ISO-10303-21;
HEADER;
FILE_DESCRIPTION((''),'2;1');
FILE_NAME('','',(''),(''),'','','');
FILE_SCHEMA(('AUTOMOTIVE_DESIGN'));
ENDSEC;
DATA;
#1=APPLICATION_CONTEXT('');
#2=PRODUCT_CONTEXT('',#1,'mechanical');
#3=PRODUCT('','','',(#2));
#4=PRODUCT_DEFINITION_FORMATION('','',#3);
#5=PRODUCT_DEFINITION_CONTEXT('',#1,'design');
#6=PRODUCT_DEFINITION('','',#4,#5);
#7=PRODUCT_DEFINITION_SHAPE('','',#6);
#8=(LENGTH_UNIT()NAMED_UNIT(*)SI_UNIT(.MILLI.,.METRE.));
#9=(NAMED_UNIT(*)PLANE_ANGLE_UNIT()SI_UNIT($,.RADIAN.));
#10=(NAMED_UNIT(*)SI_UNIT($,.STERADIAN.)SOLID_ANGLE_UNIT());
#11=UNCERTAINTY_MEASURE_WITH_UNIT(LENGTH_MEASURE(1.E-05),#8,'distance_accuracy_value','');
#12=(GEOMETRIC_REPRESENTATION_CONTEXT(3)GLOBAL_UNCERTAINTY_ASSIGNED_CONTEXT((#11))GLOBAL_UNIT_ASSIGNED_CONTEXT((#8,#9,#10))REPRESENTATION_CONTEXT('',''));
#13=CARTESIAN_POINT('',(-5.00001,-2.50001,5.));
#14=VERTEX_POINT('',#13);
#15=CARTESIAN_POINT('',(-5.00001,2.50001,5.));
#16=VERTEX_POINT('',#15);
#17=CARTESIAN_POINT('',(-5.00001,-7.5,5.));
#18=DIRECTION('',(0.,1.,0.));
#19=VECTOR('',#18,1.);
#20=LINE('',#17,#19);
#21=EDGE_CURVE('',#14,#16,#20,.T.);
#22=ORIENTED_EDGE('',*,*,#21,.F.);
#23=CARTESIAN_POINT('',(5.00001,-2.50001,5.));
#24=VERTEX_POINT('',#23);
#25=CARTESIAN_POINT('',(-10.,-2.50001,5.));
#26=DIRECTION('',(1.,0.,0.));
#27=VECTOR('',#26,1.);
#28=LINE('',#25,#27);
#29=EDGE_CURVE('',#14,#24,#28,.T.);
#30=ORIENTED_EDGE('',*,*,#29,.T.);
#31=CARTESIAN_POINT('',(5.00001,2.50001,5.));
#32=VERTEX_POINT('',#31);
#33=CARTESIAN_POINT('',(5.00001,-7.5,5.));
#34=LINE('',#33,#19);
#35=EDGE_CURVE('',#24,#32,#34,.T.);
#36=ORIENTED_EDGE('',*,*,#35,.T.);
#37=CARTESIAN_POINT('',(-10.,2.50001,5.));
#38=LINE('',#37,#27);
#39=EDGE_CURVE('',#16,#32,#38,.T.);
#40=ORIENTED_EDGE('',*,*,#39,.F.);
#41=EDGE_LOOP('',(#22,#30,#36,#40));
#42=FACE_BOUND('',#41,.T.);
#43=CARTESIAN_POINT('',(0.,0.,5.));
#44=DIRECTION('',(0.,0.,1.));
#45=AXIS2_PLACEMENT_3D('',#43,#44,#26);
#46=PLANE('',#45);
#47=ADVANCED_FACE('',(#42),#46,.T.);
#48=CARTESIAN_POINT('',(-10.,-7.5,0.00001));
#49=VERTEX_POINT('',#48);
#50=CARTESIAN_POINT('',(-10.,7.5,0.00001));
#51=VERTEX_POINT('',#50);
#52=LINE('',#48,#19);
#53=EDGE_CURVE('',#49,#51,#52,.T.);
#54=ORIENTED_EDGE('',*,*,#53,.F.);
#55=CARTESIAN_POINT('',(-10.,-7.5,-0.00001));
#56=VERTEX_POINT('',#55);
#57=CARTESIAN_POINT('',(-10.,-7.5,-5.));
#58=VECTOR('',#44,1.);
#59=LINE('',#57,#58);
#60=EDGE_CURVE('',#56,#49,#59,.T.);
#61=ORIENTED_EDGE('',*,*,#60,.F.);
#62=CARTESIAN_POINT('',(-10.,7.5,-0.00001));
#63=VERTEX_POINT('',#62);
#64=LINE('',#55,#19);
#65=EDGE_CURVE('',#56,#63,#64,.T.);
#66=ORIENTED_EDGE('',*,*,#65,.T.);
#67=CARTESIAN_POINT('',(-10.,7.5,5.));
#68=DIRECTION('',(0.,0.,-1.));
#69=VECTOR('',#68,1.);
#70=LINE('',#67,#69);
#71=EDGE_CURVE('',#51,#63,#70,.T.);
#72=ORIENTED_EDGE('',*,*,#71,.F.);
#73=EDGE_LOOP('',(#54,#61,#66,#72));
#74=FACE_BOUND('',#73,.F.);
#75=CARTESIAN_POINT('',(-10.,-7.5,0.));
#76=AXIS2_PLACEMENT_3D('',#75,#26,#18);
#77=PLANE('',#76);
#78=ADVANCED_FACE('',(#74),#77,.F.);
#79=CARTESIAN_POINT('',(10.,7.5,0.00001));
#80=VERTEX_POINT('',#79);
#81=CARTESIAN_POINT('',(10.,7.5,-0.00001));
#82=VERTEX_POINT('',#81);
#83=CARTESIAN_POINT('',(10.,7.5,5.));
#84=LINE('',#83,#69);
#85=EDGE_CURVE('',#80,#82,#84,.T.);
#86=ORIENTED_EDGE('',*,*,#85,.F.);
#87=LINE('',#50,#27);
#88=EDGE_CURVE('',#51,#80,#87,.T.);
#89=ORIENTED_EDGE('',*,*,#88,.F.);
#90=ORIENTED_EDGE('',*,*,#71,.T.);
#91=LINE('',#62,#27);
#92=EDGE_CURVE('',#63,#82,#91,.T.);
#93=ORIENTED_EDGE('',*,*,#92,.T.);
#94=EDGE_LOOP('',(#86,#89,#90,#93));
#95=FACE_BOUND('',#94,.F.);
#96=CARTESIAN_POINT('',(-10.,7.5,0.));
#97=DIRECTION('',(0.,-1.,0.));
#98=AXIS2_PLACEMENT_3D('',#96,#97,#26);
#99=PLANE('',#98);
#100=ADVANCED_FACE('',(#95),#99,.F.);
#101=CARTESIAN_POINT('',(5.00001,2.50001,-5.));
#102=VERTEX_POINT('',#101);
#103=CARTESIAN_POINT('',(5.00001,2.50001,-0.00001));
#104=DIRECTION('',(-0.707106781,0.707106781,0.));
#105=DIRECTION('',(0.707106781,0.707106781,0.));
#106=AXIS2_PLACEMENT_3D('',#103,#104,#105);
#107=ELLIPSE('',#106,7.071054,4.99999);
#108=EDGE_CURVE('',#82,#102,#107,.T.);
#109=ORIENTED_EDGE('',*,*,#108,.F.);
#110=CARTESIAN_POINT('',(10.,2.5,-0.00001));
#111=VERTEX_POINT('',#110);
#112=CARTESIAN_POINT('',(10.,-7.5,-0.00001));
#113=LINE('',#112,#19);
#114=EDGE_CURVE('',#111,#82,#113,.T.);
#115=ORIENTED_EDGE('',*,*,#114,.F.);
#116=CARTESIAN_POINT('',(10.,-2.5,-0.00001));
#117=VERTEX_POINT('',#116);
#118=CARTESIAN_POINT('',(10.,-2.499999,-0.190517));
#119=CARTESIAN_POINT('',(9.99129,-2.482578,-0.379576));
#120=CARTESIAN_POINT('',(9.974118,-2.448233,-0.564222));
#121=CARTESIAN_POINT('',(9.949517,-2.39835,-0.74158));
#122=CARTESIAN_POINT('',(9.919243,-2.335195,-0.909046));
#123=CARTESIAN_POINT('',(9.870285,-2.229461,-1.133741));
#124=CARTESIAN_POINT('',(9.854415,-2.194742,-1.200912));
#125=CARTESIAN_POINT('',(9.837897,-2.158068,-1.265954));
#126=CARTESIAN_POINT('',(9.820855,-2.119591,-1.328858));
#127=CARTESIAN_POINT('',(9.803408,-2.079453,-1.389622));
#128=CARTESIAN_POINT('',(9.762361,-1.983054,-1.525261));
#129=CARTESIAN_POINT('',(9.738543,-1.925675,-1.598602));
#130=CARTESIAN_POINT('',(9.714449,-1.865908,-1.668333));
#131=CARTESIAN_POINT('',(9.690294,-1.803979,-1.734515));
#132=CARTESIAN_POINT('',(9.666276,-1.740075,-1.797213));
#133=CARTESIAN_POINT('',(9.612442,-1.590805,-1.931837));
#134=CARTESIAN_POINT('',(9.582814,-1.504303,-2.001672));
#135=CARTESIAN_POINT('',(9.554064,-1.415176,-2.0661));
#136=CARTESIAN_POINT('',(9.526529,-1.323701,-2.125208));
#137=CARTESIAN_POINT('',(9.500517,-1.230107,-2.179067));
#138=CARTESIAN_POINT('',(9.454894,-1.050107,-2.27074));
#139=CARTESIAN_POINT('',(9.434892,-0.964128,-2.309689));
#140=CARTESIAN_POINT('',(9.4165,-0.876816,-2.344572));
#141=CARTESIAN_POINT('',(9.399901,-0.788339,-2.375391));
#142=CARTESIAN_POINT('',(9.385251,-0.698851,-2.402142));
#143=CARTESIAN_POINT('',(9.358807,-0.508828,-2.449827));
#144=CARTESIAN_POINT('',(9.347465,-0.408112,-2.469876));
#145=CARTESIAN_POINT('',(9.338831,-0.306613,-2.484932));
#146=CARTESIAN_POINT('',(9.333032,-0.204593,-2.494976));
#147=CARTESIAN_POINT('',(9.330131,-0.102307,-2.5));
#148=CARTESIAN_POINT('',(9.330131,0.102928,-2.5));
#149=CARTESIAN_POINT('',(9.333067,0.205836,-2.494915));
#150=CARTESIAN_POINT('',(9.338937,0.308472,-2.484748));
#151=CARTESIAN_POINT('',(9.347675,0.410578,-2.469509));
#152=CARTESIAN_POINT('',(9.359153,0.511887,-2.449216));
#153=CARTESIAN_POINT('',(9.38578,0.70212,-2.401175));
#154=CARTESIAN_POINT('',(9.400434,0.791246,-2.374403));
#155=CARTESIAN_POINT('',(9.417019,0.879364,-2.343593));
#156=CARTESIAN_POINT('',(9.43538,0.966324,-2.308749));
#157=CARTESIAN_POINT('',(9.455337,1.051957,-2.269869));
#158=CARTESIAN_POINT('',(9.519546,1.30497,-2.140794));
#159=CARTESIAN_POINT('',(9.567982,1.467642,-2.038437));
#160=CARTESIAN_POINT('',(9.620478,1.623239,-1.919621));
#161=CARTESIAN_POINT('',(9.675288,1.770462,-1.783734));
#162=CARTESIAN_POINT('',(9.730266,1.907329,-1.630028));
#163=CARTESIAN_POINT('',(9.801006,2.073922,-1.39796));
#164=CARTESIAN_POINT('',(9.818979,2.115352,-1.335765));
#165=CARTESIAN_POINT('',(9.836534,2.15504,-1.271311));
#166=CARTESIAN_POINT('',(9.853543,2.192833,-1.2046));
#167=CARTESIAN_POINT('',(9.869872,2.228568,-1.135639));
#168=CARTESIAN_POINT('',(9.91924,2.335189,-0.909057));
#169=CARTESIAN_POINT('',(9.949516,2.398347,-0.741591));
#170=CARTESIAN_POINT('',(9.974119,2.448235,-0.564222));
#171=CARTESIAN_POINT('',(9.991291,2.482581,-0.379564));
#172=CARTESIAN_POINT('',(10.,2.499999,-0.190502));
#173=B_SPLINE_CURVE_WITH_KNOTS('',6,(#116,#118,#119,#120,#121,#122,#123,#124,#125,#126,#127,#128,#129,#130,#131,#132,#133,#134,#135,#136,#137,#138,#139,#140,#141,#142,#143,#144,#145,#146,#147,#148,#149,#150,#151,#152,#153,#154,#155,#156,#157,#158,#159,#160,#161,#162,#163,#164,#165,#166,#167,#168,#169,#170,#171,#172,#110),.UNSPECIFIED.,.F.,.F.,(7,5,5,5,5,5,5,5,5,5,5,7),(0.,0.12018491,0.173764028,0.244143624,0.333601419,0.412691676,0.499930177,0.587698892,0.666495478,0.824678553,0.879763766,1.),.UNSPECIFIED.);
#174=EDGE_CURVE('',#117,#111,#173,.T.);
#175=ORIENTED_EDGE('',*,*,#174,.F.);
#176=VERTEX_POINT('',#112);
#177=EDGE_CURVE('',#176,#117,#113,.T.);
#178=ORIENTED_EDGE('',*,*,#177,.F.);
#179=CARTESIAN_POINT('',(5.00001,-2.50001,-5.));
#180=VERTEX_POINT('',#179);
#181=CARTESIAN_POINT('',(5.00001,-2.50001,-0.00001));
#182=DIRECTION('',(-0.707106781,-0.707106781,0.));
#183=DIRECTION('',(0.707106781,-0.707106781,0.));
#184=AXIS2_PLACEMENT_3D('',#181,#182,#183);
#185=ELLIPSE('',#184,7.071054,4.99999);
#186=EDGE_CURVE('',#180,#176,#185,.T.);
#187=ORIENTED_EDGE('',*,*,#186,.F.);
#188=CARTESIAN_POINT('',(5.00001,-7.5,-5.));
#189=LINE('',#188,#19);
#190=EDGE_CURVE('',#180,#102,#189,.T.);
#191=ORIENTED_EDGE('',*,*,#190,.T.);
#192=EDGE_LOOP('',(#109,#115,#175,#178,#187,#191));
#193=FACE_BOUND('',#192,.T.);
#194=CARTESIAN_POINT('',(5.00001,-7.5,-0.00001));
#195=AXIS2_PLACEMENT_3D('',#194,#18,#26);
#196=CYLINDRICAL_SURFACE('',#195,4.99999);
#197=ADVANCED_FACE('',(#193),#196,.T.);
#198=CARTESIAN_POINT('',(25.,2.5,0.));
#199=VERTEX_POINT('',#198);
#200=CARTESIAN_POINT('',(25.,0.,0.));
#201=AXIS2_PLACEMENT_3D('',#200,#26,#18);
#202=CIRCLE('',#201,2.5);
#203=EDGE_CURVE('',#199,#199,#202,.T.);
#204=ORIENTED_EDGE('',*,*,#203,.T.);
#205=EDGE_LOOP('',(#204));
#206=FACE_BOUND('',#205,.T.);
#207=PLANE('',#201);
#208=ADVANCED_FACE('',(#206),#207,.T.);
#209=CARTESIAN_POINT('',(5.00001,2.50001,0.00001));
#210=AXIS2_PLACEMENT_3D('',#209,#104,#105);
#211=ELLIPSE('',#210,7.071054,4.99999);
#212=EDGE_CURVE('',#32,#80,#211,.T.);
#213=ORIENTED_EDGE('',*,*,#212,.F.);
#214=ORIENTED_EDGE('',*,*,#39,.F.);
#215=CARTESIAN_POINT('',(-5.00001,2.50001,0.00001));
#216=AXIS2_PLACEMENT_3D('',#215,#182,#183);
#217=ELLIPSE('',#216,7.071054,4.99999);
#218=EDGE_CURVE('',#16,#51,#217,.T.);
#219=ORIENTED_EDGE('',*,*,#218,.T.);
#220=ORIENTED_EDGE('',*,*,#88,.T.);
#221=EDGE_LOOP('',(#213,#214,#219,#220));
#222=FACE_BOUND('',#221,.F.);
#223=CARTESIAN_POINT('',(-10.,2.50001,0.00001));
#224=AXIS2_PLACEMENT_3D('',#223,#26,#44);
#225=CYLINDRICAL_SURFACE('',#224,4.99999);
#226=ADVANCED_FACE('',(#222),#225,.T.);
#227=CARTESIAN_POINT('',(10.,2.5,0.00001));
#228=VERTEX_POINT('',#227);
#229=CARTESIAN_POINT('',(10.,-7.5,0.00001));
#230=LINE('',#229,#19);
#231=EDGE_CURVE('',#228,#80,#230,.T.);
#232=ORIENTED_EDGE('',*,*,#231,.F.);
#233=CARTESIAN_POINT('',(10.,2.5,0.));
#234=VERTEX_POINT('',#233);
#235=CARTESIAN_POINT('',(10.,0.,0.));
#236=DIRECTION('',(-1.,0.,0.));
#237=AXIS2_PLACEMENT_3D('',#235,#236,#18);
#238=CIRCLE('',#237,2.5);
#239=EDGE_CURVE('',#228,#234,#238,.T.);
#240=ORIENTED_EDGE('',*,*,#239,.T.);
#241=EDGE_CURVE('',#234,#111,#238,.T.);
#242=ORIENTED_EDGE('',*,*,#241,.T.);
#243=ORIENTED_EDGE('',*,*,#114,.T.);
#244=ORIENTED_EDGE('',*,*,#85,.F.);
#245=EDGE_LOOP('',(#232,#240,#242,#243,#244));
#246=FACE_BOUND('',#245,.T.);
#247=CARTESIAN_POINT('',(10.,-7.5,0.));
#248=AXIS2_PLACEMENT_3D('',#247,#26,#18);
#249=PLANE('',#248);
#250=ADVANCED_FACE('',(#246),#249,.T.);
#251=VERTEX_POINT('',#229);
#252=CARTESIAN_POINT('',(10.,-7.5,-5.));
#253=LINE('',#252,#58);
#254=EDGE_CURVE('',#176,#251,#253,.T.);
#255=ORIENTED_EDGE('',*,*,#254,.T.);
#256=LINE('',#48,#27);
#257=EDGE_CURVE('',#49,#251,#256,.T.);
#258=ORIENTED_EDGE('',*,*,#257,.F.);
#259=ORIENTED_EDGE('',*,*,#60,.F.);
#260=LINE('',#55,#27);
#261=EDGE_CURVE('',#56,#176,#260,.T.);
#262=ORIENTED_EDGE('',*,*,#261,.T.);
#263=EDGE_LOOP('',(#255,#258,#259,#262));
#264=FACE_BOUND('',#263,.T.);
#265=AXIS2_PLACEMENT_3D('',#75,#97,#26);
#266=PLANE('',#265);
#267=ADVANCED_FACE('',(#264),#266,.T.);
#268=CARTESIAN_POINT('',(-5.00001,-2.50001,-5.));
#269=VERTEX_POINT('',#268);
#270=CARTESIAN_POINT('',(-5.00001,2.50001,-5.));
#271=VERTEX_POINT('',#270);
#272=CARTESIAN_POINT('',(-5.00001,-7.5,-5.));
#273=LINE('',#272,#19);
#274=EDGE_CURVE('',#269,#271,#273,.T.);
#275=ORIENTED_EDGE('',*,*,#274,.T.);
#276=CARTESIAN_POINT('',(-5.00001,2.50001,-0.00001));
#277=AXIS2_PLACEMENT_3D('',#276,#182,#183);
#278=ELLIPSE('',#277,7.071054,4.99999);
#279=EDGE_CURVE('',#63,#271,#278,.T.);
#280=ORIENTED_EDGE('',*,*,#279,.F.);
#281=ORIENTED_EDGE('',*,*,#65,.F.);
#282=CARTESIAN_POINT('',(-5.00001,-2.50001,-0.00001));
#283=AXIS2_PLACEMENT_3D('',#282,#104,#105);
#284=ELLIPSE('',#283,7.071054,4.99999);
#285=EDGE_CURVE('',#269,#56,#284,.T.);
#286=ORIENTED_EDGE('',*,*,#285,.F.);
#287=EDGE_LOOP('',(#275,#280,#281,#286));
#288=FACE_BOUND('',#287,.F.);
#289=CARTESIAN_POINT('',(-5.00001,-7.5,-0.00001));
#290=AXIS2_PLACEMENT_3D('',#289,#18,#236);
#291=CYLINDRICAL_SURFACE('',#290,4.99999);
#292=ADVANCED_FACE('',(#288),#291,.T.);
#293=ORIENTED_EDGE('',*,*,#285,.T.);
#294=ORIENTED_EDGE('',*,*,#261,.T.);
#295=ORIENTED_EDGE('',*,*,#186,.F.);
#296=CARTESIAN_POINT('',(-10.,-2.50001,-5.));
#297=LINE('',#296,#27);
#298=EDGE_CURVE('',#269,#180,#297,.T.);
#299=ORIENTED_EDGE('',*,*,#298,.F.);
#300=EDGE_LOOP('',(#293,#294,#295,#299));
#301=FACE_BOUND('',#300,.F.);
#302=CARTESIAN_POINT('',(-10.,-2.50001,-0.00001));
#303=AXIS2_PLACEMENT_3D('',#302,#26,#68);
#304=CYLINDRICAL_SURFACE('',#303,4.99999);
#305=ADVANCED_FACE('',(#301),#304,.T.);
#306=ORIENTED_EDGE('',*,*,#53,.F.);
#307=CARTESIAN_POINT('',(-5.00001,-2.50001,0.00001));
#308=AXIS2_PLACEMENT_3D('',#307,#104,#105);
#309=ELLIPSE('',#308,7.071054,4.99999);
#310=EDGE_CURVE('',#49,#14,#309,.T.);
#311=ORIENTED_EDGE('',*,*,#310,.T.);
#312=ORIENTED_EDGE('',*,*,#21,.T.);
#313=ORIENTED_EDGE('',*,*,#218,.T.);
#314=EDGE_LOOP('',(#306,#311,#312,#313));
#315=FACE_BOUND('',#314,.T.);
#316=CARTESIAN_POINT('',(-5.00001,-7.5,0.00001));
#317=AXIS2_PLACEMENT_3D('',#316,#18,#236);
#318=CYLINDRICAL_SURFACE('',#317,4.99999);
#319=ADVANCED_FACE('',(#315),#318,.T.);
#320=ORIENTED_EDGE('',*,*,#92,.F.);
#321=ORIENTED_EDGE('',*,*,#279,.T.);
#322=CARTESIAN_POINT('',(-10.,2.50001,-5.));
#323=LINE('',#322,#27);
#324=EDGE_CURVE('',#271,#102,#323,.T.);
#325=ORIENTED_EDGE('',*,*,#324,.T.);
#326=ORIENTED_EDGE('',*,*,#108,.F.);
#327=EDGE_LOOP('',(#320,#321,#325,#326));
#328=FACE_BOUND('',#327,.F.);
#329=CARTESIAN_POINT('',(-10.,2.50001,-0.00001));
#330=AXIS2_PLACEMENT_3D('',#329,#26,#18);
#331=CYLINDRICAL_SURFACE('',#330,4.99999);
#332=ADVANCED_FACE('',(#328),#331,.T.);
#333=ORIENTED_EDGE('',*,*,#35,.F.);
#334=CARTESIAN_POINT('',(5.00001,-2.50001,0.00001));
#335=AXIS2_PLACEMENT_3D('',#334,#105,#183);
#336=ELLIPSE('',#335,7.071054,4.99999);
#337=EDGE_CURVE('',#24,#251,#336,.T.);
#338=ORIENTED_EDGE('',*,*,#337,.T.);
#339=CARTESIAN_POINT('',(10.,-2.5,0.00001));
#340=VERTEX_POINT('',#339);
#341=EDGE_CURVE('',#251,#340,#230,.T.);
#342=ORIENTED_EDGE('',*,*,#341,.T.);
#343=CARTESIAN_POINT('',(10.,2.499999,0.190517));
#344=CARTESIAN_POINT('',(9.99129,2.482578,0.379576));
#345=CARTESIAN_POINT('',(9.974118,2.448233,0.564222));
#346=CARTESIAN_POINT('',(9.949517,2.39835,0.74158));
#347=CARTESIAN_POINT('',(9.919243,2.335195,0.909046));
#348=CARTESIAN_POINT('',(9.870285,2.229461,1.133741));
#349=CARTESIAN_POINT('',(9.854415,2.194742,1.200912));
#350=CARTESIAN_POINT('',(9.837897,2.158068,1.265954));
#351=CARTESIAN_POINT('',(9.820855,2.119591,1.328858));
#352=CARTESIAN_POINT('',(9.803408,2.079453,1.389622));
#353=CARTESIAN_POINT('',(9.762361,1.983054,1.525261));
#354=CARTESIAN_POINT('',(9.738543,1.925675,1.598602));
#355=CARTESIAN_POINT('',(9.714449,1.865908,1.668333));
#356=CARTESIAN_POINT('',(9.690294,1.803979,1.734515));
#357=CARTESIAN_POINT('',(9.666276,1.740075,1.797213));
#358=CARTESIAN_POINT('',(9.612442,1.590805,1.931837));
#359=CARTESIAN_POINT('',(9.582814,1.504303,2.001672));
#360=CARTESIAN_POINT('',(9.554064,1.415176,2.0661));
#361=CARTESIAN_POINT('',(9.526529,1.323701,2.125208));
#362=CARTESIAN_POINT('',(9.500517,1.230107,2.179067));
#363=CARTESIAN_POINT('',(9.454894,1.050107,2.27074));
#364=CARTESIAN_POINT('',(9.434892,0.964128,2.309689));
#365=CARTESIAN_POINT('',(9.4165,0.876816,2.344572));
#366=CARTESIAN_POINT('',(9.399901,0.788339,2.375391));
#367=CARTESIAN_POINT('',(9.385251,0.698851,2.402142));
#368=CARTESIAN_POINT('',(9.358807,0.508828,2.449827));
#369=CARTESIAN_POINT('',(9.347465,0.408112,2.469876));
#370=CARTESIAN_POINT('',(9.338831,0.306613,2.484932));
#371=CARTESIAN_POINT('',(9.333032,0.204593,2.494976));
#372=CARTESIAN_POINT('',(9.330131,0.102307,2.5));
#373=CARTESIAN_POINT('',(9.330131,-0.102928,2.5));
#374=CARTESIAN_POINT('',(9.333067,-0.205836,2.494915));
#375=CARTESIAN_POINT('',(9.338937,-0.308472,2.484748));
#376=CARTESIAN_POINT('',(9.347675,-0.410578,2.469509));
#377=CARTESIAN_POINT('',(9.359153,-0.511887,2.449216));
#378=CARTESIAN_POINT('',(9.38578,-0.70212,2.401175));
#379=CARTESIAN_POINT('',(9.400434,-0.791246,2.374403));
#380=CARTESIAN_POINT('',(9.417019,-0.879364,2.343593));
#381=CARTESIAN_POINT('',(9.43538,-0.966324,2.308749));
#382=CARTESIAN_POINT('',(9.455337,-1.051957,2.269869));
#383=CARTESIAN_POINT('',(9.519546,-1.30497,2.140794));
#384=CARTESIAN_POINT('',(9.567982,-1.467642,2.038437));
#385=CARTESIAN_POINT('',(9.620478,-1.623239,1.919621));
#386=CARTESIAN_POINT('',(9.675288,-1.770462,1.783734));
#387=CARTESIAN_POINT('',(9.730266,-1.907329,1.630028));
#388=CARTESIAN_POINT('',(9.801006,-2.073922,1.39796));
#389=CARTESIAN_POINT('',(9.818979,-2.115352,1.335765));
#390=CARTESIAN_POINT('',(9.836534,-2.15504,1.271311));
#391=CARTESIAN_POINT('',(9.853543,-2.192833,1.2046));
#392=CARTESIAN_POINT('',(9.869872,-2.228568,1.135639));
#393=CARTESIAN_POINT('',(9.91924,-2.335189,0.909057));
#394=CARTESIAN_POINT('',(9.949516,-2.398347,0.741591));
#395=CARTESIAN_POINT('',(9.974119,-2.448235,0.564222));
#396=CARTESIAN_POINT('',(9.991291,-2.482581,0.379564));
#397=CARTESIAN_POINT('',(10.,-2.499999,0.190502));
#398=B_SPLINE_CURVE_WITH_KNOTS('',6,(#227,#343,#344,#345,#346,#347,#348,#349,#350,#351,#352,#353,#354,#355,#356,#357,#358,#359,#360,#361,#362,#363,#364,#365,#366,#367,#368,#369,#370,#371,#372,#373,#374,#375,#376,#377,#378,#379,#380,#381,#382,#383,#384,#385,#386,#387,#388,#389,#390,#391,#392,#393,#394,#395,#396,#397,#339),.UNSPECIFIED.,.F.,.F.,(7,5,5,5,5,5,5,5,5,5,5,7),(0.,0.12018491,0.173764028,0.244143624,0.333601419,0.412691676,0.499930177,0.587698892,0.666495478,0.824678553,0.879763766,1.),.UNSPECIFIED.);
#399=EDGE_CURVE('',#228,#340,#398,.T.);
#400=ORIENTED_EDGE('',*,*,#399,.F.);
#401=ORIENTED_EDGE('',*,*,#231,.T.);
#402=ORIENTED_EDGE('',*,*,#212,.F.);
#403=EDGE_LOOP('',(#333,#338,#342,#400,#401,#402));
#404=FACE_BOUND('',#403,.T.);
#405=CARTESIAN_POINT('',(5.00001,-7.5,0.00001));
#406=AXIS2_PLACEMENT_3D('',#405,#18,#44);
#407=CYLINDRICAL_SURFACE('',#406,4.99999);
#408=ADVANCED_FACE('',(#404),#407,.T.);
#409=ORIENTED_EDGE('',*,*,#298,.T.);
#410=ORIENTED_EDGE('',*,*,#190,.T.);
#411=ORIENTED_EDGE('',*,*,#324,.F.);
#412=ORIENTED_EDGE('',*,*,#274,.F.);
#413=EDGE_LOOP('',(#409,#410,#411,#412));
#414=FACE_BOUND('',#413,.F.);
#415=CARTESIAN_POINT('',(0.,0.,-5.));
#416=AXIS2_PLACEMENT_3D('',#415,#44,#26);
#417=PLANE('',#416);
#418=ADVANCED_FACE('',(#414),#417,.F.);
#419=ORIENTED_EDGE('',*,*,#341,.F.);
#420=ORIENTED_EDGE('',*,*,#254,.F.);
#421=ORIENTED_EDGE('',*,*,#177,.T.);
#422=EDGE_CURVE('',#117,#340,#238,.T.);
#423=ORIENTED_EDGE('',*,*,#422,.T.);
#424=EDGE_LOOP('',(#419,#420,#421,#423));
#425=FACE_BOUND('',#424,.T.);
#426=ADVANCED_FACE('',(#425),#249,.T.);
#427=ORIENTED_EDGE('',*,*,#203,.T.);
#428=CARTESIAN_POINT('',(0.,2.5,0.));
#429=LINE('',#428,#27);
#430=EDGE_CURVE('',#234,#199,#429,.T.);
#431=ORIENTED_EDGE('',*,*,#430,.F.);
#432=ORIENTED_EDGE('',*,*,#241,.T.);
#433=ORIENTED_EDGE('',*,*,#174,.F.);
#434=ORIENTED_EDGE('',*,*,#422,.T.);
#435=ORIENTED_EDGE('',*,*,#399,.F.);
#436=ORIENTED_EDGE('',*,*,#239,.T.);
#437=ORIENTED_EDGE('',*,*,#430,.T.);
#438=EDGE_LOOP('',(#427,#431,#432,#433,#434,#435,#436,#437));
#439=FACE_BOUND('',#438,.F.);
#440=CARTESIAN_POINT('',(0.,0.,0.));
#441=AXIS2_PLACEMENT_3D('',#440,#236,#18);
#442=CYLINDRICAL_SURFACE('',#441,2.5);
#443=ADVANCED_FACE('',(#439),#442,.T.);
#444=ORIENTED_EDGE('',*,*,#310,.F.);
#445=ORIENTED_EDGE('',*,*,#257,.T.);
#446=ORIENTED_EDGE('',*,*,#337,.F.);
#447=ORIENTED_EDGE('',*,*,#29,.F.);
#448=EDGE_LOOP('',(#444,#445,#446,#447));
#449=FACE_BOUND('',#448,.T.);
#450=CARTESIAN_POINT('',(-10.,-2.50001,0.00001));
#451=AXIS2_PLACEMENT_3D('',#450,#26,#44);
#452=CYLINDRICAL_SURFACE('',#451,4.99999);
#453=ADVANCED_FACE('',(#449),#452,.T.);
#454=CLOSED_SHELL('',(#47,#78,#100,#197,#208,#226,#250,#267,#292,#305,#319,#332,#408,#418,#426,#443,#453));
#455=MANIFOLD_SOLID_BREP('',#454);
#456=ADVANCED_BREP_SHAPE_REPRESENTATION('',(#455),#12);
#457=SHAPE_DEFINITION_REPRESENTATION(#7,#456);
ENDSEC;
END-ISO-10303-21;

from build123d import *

# Parameters (mm, degrees)
F0_W     = 20
F0_H     = 15
F1_DEPTH = 5
F2_R     = 4.99999
F3_R     = 2.5
F4_DEPTH = 25


# Not quite as in the source:
# - a fillet or chamfer is up to 0.001 mm smaller than in the source, because OpenCascade refuses the exact size


with BuildPart() as f1:
    # F0 (on Top) → F1 (new body, symmetric)
    with BuildSketch(Plane.XY):
        Rectangle(F0_W, F0_H)
    extrude(amount=F1_DEPTH, both=True)

    # F2 (radius 5 in the source; OpenCascade refuses exactly that, so slightly less here)
    f2_edges = [f1.edges().sort_by_distance(p)[0] for p in [
        (0, 7.5, 5),
        (-10, 0, 5),
        (0, -7.5, 5),
        (10, 0, 5),
        (0, -7.5, -5),
        (10, 0, -5),
        (0, 7.5, -5),
        (-10, 0, -5),
    ]]
    fillet(f2_edges, radius=F2_R)

    # F3 (on Right) → F4 (join)
    with BuildSketch(Plane.YZ):
        Circle(F3_R)
    extrude(amount=F4_DEPTH)


solid = f1.part
